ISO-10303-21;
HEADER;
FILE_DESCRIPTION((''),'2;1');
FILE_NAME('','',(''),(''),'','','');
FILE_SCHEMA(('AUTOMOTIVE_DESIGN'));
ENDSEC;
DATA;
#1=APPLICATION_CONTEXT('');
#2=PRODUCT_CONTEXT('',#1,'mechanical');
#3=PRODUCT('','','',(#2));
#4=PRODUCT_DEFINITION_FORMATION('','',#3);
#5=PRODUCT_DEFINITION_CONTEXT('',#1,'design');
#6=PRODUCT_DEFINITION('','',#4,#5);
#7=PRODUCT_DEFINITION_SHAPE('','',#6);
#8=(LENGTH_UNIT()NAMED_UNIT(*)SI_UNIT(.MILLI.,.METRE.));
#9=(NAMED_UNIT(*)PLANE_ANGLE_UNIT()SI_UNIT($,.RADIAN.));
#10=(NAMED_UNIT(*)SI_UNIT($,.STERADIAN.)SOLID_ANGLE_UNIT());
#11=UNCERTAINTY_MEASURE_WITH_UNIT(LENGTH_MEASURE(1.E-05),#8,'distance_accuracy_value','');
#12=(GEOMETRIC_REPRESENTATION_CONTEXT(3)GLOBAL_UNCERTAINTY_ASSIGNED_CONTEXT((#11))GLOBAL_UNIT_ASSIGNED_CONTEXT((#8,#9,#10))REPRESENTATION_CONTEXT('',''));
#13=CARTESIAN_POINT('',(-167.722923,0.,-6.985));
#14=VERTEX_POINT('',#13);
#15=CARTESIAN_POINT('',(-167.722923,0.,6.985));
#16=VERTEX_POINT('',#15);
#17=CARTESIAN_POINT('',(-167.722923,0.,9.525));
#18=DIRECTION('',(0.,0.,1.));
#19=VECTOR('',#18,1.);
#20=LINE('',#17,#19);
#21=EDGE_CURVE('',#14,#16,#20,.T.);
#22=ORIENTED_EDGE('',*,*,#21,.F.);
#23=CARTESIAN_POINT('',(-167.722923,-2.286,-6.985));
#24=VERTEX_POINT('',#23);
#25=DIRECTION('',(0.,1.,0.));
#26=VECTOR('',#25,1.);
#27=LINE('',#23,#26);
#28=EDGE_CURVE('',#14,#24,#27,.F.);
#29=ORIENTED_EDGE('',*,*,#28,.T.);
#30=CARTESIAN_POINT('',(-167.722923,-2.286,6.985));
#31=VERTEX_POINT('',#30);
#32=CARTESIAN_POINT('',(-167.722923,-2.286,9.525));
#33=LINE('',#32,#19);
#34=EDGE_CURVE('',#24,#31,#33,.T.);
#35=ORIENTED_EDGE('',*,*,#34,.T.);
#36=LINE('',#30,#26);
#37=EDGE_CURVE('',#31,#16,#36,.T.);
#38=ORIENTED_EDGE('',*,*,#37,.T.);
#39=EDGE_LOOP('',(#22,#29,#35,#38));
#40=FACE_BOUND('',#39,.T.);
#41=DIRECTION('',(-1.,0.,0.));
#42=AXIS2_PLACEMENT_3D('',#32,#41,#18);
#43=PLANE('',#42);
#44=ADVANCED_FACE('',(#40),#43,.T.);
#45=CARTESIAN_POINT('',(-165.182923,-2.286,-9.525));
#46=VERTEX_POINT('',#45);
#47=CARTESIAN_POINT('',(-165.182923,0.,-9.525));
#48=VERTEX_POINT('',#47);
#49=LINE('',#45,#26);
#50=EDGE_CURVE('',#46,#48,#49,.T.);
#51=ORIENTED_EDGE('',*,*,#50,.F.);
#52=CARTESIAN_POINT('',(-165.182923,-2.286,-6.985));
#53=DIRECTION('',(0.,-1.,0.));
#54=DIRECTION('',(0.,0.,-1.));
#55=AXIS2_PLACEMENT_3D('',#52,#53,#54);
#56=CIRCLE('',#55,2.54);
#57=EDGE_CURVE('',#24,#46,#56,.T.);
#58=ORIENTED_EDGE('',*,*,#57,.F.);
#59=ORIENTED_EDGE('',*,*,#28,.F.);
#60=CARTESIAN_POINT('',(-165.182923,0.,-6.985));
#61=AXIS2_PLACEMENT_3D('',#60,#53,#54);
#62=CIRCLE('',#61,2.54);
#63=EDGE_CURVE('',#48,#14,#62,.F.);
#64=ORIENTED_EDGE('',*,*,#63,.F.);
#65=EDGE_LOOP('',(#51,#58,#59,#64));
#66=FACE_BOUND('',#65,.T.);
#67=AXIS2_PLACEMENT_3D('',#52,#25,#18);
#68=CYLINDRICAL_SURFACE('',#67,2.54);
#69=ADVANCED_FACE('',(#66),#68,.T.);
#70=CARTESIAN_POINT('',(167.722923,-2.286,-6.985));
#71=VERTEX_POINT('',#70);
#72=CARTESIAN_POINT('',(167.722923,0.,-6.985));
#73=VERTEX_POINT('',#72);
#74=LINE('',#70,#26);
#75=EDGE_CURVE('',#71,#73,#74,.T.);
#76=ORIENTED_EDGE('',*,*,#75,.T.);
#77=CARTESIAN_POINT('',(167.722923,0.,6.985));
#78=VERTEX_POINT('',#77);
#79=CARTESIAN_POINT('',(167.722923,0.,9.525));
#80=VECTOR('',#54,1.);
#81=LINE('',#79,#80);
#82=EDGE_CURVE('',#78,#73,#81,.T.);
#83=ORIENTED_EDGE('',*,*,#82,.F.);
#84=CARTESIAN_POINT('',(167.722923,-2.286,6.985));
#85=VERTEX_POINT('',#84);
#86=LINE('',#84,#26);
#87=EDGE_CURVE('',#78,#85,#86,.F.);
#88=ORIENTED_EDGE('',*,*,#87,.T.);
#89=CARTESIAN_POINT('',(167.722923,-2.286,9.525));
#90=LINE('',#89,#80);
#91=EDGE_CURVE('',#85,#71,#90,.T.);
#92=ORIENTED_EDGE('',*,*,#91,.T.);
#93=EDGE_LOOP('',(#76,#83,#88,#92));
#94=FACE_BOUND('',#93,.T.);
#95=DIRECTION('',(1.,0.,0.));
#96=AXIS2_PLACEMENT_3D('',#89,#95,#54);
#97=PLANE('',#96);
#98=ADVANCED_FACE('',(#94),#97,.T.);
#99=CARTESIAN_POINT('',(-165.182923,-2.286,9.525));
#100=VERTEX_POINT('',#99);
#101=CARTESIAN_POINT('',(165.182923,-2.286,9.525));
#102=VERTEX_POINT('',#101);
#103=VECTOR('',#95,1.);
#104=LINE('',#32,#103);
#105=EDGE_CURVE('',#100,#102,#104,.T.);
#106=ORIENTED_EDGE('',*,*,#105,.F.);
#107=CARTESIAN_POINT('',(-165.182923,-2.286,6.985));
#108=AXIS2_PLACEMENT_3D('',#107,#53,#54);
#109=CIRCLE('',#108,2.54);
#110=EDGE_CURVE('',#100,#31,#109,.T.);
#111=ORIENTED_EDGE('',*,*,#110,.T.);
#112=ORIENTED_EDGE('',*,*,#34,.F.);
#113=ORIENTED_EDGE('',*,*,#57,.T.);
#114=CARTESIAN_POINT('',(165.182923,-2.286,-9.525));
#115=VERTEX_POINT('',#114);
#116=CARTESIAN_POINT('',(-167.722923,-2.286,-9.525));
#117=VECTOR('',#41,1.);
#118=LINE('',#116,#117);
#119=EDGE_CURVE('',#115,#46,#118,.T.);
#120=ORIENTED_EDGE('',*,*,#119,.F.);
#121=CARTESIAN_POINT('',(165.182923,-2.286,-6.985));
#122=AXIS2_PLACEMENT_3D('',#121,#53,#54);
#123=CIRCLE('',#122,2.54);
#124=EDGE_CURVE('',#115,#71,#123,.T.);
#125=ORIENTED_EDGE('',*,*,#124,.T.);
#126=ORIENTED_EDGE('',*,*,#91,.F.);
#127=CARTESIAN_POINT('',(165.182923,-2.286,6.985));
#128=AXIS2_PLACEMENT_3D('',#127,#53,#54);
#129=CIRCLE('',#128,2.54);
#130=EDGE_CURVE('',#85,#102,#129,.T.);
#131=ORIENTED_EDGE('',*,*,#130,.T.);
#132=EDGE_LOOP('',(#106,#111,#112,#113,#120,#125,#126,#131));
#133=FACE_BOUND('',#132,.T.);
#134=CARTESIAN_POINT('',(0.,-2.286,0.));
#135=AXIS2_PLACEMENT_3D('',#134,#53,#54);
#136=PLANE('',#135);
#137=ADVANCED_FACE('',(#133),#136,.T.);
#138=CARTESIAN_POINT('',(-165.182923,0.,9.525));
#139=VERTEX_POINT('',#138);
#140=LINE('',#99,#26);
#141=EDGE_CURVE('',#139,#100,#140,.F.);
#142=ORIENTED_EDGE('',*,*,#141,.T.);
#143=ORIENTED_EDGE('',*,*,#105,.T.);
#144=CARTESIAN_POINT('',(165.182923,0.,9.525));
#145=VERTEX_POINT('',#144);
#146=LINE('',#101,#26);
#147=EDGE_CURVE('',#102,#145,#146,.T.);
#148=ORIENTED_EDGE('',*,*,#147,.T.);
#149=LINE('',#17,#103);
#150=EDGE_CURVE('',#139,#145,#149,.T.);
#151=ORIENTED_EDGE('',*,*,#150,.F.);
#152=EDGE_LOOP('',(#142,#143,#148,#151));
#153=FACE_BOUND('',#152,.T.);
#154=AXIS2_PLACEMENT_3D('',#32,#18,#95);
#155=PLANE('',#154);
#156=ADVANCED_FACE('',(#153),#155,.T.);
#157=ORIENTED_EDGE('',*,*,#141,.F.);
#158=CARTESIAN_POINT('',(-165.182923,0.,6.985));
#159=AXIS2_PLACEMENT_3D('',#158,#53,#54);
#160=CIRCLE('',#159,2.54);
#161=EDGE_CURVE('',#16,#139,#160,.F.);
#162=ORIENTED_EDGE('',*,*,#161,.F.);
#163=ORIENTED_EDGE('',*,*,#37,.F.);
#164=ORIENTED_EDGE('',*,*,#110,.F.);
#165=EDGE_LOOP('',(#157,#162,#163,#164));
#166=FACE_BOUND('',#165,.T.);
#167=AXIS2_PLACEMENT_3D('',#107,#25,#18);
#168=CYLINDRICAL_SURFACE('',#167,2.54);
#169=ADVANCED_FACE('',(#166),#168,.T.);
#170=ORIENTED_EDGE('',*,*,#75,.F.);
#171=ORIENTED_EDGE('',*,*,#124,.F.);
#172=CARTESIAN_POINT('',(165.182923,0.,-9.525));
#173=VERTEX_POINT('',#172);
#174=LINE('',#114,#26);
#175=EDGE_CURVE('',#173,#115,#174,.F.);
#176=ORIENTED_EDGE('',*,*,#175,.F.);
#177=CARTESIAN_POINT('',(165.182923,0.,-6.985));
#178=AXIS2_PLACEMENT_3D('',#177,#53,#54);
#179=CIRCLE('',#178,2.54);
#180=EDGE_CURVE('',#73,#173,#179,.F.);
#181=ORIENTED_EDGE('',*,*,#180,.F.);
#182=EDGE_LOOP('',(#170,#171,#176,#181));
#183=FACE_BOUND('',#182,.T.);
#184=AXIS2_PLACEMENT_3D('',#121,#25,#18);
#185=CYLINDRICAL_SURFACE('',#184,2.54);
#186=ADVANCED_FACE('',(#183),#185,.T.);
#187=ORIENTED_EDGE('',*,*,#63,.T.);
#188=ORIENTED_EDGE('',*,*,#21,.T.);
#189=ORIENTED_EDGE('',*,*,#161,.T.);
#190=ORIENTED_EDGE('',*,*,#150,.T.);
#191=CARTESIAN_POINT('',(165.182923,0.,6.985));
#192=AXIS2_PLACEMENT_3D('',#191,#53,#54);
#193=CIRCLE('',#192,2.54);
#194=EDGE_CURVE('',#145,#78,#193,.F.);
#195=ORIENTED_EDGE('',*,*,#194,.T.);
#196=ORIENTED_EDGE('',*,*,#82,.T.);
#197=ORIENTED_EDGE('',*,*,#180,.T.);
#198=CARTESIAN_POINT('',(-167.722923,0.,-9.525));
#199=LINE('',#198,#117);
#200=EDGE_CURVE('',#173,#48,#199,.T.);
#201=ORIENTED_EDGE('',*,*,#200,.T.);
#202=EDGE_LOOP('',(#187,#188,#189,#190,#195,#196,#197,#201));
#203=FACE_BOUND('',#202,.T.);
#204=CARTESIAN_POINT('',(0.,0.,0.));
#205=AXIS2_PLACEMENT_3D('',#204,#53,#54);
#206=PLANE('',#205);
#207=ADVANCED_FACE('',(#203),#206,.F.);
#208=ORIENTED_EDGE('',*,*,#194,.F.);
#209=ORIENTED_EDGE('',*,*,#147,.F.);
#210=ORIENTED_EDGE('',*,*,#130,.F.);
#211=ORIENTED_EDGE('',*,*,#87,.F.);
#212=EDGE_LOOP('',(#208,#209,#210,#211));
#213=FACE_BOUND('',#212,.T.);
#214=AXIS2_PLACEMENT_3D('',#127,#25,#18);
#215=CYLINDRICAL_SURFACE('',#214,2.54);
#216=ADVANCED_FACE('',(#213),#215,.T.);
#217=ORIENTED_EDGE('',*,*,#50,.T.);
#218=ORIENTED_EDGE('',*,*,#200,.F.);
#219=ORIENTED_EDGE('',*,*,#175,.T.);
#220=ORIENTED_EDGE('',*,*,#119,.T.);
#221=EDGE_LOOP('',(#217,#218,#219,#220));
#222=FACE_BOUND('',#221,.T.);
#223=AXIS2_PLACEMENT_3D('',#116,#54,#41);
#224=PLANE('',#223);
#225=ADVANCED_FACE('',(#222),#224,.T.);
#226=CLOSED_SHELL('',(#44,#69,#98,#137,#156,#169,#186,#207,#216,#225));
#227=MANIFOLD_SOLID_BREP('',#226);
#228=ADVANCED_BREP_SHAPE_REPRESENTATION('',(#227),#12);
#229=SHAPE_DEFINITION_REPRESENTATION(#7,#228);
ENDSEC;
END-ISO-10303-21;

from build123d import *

# Parameters (mm, degrees)
SKETCH1_W          = 335.44584549
SKETCH1_H          = 19.05
BASE_FLANGE1_DEPTH = 2.286
FILLET1_R          = 2.54


# Sheet-metal steps are written as plain solids
with BuildPart() as part:
    # Sketch1 → Base-Flange1 (new body)
    with BuildSketch(Plane(origin=(0, 0, 0), x_dir=(1, 0, 0), z_dir=(0, 1, 0))):
        Rectangle(SKETCH1_W, SKETCH1_H)
    extrude(amount=-BASE_FLANGE1_DEPTH)

    # Fillet1
    fillet1_edges = [part.edges().sort_by_distance(p)[0] for p in [
        (167.722922745, -1.143, 9.525),
        (-167.722922745, -1.143, 9.525),
        (-167.722922745, -1.143, -9.525),
        (167.722922745, -1.143, -9.525),
    ]]
    fillet(fillet1_edges, radius=FILLET1_R)


solid = part.part
